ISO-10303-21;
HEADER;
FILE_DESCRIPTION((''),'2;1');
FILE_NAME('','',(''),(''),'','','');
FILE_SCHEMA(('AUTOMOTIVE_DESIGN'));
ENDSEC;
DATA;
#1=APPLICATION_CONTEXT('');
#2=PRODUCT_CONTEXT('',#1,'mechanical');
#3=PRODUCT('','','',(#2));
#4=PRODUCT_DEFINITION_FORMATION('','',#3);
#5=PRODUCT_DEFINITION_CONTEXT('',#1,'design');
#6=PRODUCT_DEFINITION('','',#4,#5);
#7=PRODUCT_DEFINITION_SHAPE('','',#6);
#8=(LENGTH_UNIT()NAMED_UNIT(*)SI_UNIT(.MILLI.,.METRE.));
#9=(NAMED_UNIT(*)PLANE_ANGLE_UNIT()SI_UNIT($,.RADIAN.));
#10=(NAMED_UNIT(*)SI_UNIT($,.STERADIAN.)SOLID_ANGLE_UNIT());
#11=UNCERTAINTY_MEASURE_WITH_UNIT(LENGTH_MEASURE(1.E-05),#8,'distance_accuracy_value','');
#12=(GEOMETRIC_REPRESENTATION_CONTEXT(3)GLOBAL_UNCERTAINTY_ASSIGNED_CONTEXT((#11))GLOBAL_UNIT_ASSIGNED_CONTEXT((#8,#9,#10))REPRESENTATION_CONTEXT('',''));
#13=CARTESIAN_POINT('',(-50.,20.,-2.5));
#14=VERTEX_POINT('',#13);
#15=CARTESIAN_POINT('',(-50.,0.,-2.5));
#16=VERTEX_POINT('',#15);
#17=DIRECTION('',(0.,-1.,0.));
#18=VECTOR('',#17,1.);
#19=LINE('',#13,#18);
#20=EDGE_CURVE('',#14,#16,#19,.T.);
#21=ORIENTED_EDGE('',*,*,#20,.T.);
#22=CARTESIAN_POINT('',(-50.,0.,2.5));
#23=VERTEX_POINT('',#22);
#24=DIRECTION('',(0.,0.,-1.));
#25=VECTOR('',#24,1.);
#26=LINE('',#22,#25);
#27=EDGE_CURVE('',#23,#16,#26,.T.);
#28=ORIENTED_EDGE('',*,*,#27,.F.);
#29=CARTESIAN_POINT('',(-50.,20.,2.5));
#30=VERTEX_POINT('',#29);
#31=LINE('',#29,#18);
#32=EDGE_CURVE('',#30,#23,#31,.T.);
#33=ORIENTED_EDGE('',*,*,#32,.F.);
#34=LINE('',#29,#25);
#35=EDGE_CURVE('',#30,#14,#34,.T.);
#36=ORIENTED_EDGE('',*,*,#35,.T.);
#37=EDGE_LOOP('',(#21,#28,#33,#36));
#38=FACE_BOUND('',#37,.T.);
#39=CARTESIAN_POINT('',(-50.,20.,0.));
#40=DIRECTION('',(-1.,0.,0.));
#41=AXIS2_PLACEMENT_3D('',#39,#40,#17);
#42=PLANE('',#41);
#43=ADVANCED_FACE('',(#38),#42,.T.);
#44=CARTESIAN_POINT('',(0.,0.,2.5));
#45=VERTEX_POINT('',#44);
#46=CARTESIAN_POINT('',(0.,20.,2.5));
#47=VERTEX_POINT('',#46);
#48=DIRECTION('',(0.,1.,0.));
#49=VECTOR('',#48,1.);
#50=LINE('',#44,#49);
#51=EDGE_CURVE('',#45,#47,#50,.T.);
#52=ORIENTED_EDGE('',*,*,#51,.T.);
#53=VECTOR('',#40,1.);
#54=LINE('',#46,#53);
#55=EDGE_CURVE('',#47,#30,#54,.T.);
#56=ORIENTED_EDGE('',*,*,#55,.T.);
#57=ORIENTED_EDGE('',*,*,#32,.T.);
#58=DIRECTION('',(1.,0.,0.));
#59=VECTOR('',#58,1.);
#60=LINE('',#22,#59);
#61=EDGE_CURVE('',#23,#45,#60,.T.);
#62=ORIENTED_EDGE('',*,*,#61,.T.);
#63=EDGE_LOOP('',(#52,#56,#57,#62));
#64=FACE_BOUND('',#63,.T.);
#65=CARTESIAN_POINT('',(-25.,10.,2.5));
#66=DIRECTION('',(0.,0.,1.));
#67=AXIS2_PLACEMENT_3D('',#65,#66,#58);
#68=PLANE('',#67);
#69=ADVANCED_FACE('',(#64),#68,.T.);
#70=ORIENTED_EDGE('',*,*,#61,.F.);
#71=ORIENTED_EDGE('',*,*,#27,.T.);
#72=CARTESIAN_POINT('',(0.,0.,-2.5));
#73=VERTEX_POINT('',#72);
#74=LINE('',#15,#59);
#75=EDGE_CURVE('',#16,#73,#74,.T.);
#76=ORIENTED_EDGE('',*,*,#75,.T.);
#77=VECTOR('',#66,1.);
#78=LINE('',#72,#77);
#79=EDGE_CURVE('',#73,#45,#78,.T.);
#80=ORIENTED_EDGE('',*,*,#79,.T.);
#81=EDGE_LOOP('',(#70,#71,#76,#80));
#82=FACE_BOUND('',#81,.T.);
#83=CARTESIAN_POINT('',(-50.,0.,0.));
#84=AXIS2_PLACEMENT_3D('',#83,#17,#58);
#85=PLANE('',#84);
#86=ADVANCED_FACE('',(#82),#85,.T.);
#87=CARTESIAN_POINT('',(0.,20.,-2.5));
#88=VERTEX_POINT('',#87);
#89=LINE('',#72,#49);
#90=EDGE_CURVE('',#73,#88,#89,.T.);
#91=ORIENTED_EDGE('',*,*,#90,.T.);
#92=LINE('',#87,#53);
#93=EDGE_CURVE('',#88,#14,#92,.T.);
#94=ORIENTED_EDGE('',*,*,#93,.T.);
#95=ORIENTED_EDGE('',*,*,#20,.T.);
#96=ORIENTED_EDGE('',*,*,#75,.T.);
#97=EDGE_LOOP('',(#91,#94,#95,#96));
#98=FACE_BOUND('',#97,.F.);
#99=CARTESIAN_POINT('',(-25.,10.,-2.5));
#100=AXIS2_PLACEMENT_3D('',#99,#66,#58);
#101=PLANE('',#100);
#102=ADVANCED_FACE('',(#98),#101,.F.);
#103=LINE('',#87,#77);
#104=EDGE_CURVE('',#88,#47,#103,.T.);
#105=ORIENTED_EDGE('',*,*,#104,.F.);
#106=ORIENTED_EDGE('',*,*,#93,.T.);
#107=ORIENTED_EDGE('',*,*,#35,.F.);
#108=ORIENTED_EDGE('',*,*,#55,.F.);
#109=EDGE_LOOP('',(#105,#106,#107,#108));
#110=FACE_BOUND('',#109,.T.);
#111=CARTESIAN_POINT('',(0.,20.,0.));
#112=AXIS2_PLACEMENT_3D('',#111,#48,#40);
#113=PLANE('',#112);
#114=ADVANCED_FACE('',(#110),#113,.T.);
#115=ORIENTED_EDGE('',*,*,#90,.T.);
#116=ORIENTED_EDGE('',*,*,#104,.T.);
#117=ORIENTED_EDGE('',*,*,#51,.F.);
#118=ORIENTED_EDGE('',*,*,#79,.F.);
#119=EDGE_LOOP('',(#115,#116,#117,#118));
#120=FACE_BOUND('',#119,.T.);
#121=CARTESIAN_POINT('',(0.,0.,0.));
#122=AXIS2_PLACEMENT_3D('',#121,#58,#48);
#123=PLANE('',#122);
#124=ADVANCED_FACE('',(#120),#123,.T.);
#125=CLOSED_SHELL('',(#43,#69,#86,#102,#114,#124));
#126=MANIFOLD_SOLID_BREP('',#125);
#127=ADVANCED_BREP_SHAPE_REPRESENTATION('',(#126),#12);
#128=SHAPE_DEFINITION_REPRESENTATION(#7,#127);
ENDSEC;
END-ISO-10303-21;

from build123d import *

# Parameters (mm, degrees)
F1_DEPTH = 2.5


# Not quite as in the source:
# - a feature names something its author has since deleted; it is built from what else it names


with BuildPart() as f1:
    # F0 (on Top) → F1 (new body, symmetric)
    with BuildSketch(Plane.XY):
        Polygon((-50, 0), (0, 0), (0, 20), (-50, 20), (-50, 10), align=None)
    extrude(amount=F1_DEPTH, both=True)


solid = f1.part
